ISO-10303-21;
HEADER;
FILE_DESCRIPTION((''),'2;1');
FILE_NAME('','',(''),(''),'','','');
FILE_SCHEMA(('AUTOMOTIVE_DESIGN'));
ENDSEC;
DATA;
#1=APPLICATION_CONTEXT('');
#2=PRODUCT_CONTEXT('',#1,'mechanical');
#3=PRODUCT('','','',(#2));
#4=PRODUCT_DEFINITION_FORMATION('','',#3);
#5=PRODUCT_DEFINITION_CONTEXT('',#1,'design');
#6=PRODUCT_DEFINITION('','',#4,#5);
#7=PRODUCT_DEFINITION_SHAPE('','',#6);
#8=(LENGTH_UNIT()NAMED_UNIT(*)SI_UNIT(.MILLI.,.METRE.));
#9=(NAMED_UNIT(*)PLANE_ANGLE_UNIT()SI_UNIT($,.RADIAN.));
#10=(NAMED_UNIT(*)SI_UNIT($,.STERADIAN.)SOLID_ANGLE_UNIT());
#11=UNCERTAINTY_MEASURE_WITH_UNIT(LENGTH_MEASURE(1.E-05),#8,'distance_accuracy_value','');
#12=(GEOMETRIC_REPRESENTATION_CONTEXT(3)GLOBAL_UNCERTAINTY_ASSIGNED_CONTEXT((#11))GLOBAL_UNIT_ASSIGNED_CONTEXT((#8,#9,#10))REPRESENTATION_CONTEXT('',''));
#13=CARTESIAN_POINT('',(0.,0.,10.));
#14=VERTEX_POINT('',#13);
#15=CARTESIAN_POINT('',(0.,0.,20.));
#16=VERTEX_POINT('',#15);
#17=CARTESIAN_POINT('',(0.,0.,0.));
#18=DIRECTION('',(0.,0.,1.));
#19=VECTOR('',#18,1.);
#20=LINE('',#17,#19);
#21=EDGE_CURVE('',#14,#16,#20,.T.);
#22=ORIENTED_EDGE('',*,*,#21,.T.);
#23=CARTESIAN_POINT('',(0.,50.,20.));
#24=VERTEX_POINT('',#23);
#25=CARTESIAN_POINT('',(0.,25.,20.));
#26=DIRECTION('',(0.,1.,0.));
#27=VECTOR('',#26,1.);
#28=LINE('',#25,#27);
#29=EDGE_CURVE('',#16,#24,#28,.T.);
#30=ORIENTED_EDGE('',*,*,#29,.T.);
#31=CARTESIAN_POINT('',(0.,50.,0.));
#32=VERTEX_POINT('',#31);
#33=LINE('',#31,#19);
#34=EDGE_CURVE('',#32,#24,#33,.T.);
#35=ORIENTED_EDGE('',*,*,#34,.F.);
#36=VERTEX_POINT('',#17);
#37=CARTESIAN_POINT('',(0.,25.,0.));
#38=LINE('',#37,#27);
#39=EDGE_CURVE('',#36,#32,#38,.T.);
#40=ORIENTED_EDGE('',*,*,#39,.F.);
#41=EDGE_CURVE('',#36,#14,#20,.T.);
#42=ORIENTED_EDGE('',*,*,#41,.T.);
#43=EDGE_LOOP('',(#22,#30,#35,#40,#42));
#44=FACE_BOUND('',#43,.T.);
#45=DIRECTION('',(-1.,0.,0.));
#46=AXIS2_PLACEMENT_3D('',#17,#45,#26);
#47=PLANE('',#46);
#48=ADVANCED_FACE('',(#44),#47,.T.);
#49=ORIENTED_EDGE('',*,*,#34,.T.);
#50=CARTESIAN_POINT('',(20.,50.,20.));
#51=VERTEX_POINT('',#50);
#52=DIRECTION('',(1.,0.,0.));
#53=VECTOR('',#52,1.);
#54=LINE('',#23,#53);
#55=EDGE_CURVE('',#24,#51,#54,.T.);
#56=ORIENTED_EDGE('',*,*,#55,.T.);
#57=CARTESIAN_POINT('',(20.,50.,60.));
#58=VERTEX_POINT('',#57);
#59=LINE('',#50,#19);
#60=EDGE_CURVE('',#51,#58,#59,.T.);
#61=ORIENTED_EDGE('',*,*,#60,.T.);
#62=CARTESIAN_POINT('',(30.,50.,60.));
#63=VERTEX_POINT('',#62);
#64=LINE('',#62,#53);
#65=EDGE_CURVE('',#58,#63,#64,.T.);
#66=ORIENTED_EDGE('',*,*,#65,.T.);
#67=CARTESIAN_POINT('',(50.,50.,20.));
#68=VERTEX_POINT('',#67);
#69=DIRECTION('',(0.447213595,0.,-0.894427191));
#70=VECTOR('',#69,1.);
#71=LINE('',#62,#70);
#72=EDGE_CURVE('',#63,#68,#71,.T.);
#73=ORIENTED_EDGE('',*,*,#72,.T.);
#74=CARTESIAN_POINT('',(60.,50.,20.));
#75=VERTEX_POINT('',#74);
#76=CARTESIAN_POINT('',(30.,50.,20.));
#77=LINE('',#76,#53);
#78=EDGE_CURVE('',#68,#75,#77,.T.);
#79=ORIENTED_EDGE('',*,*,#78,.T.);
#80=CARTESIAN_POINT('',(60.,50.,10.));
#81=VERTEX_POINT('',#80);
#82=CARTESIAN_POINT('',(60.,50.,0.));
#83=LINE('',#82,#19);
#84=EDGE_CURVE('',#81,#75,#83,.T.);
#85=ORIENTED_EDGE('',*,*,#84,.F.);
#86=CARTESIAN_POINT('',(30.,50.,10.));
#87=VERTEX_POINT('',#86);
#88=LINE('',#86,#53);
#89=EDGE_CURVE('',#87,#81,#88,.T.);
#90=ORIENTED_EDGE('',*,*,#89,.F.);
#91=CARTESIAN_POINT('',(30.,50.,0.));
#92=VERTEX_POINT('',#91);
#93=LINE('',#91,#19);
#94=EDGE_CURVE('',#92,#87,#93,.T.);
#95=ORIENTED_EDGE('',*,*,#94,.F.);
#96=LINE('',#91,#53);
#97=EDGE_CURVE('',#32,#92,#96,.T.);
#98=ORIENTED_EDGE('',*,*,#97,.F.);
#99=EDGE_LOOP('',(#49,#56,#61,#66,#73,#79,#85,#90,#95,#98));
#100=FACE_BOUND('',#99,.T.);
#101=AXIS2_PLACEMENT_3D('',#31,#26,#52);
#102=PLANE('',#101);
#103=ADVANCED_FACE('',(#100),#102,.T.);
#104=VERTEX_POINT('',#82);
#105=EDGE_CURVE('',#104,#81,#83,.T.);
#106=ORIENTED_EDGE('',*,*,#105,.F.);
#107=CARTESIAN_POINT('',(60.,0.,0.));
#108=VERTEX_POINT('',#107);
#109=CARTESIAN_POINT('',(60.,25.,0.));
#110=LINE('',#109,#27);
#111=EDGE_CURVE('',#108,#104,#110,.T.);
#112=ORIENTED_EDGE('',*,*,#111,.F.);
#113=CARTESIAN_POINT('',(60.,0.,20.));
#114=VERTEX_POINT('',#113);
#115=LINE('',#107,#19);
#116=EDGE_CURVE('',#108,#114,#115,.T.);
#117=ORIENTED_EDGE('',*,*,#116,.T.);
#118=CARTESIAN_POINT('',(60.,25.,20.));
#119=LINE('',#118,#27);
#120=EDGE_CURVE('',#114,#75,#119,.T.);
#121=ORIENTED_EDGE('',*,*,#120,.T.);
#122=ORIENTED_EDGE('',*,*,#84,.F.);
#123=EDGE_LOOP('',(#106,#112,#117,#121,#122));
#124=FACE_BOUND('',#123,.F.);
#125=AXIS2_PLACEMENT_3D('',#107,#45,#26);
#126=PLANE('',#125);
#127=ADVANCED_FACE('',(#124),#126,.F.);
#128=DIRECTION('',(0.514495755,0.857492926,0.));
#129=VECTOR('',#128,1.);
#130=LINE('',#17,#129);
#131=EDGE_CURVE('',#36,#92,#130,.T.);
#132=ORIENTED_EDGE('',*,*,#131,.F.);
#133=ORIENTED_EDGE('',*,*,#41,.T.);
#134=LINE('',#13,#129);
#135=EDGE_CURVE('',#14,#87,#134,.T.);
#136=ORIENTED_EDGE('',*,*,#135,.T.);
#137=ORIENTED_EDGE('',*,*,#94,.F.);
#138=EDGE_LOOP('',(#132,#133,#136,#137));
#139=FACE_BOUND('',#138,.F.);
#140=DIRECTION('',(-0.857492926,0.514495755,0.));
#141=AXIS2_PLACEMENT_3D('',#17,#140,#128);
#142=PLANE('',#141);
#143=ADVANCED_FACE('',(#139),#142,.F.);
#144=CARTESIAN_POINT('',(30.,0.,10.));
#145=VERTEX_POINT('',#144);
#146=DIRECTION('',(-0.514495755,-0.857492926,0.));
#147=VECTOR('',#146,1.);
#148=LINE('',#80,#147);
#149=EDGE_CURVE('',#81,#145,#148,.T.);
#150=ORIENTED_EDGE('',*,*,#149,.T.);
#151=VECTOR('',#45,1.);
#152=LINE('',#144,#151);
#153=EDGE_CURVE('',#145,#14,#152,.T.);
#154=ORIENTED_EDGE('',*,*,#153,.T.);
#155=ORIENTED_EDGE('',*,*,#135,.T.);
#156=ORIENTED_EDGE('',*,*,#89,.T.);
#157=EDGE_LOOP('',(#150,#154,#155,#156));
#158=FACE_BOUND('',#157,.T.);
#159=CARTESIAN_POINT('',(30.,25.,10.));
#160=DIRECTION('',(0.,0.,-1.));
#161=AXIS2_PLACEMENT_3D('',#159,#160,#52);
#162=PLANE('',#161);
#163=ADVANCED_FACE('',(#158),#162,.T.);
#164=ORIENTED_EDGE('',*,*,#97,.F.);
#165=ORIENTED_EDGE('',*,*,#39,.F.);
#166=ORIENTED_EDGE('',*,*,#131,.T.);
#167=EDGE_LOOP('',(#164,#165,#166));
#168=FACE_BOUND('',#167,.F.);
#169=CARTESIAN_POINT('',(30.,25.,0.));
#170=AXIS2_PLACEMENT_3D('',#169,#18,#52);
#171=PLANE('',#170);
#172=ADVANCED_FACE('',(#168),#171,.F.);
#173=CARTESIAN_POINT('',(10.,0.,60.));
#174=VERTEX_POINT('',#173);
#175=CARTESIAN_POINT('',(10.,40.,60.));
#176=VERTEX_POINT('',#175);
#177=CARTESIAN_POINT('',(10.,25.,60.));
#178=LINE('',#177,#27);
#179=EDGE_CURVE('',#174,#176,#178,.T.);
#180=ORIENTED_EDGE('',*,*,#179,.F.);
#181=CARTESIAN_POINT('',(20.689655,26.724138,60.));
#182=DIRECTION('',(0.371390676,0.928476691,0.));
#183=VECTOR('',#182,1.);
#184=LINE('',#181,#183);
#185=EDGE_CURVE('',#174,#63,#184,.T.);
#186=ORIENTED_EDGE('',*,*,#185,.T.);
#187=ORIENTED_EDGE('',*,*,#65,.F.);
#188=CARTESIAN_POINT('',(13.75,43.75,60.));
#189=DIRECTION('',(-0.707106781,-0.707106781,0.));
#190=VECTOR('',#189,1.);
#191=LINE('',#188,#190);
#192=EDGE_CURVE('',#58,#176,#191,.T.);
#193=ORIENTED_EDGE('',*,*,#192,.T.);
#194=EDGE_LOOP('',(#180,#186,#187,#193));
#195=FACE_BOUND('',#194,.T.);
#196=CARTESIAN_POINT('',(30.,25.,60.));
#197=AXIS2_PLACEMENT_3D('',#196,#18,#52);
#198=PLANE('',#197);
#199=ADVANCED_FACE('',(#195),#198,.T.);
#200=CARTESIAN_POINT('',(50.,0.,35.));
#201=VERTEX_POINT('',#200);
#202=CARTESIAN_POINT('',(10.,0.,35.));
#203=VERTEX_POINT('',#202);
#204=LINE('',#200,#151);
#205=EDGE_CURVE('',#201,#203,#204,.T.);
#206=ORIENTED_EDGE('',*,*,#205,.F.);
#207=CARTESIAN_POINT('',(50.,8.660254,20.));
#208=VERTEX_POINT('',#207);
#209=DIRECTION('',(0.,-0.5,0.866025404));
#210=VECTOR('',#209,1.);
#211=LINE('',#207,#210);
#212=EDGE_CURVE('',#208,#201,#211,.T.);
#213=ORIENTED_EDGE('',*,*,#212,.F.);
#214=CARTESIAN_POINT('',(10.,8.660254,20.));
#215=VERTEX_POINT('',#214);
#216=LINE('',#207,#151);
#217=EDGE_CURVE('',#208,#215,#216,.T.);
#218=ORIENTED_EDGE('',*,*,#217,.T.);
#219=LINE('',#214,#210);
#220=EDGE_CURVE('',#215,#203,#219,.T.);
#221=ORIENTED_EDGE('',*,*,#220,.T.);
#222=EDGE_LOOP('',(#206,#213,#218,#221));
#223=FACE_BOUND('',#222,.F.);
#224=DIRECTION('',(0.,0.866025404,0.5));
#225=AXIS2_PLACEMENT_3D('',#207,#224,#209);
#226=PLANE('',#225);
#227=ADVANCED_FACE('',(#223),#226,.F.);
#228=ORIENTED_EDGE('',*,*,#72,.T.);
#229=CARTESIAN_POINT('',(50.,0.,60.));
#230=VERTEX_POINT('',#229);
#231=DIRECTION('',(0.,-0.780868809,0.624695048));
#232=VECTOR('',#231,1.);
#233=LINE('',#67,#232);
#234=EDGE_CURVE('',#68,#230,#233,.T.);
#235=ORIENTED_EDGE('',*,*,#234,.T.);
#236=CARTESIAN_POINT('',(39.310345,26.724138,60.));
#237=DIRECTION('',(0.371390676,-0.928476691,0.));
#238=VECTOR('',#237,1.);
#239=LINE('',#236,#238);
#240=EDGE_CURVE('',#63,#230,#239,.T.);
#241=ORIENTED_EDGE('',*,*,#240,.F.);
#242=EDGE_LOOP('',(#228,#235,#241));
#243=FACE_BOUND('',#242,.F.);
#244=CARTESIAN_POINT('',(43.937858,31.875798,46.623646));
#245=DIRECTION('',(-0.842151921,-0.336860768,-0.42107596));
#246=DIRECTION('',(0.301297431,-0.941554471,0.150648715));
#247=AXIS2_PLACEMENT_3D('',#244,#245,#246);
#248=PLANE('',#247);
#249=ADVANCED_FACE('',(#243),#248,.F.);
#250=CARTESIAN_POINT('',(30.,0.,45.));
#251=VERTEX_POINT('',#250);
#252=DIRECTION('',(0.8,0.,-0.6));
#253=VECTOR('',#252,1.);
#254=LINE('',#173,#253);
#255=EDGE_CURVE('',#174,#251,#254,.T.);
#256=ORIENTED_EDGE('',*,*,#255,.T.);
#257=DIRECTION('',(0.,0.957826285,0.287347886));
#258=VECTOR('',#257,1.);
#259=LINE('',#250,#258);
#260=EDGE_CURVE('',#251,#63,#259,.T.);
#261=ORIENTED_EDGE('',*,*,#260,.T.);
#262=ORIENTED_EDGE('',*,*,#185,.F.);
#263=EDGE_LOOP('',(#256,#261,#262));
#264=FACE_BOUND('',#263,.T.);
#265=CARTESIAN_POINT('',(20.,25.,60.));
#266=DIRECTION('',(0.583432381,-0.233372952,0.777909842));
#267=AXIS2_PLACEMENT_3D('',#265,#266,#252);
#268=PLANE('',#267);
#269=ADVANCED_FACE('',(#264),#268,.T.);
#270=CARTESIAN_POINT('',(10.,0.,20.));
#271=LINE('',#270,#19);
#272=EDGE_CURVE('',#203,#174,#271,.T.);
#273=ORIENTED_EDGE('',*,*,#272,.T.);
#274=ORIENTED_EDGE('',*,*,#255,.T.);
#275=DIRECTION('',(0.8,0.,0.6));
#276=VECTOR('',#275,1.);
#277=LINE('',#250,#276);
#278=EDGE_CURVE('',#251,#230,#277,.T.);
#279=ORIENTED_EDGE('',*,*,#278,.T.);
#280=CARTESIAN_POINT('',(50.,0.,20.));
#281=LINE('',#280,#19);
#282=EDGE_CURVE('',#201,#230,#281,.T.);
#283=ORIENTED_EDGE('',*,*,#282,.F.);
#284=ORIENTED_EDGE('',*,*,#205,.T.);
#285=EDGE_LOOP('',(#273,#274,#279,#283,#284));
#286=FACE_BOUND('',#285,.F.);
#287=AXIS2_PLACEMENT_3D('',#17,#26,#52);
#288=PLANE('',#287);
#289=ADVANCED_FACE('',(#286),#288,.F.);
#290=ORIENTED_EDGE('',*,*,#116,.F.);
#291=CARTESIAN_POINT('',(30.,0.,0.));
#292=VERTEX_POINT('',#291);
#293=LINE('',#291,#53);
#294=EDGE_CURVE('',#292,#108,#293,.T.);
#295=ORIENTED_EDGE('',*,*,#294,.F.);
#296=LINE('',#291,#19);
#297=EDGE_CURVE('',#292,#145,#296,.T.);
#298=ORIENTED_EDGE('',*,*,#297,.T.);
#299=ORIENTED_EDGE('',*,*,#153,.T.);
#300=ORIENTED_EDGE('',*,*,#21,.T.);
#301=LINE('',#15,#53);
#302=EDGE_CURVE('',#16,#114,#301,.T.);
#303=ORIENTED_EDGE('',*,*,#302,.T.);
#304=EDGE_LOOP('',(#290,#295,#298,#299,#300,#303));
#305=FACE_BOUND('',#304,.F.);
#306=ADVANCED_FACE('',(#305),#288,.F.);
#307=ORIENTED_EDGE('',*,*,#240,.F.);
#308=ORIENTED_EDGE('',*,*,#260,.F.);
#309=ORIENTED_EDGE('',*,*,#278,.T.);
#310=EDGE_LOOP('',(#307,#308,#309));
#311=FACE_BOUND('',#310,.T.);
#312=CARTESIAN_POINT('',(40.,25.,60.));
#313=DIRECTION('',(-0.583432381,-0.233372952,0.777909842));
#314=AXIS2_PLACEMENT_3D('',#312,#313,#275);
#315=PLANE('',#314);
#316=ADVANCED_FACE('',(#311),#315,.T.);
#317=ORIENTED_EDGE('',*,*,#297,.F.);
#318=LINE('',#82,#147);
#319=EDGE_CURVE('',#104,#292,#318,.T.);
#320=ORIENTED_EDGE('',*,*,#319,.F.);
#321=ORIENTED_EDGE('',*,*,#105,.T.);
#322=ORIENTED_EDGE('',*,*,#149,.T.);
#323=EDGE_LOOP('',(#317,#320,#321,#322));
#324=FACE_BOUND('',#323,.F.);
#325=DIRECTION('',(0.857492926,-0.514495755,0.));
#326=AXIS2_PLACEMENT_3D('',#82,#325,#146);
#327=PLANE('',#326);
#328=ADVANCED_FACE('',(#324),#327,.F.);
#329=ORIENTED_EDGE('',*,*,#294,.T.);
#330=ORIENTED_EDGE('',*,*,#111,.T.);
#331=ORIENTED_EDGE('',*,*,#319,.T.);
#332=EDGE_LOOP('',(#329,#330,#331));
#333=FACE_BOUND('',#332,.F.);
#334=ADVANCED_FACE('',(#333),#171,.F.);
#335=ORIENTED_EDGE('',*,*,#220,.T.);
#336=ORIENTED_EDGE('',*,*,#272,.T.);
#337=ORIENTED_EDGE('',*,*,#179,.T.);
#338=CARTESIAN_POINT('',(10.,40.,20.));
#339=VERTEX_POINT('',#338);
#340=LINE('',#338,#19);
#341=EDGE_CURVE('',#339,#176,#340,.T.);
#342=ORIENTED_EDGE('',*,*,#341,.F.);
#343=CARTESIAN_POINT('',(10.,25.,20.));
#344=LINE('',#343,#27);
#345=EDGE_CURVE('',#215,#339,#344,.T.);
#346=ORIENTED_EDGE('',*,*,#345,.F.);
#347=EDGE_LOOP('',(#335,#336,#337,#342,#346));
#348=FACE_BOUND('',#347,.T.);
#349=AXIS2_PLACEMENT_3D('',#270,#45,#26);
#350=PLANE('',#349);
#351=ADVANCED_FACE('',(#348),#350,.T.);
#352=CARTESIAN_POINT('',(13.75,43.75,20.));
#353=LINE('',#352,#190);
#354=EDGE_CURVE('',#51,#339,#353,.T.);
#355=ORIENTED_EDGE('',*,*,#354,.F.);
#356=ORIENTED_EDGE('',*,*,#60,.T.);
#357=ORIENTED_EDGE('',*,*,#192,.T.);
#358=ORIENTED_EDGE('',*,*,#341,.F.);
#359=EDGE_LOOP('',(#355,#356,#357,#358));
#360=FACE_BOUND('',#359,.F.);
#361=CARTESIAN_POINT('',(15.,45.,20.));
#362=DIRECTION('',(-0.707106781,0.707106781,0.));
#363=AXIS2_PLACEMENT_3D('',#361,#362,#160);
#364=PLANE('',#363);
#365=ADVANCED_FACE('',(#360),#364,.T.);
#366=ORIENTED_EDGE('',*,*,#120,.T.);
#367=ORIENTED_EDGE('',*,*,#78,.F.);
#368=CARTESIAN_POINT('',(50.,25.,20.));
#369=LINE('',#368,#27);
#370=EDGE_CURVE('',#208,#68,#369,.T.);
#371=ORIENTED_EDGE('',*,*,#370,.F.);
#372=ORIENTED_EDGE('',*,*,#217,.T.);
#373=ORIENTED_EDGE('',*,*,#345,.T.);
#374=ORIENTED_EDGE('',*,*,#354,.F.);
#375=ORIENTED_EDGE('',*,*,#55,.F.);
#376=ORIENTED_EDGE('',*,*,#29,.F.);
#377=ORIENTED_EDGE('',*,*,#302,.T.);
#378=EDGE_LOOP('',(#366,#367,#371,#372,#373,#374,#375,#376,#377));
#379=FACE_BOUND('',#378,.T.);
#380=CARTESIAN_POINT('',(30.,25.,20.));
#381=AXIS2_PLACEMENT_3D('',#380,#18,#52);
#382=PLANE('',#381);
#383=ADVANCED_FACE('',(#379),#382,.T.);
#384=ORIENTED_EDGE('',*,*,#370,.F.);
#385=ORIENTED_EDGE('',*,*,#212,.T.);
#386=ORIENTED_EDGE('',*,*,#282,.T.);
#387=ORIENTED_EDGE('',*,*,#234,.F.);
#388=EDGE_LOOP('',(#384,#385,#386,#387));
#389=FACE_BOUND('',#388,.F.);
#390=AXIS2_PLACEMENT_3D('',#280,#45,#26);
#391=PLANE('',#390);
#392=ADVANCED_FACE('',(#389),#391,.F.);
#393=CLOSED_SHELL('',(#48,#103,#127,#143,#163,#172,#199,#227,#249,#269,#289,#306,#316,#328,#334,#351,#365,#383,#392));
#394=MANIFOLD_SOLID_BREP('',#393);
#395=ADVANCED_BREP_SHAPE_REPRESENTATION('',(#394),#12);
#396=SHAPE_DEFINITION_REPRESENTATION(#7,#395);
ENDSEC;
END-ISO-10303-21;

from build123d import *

# Parameters (mm, degrees)
F0_W      = 60
F0_H      = 50
F1_DEPTH  = 20
F4_DEPTH  = 10
F5_W      = 40
F5_H      = 50
F6_DEPTH  = 40
F7_SIZE   = 10
F9_DEPTH  = 40
F16_DEPTH = 16.8440384213


with BuildPart() as f1:
    # F0 (on Top) → F1 (new body)
    with BuildSketch(Plane.XY):
        with Locations((30, 25)):
            Rectangle(F0_W, F0_H)
    extrude(amount=F1_DEPTH)

    # F3 (on face) → F4 (cut, through all)
    with BuildSketch(Plane(origin=(0, 0, 0), x_dir=(1, 0, 0), z_dir=(0, 0, -1))):
        Polygon((30, 0), (0, 0), (30, -50), (60, -50), align=None)
    extrude(amount=-F4_DEPTH, mode=Mode.SUBTRACT)

    # F5 (on face) → F6 (join)
    with BuildSketch(Plane.XY.offset(20)):
        with Locations((30, 25)):
            Rectangle(F5_W, F5_H)
    extrude(amount=F6_DEPTH)

    # F7
    f7_edges = [f1.edges().sort_by_distance(p)[0] for p in [
        (10, 50, 40),
    ]]
    chamfer(f7_edges, length=F7_SIZE)

    # F8 (on face) → F9 (cut, through all)
    with BuildSketch(Plane.YZ.offset(50)):
        Polygon((0, 35), (0, 20), (8.6602540378, 20), align=None)
    extrude(amount=-F9_DEPTH, mode=Mode.SUBTRACT)

    # F13: sweep along a path in F11
    with BuildLine(Plane(origin=(30, 0, 0), x_dir=(0, -1, 0), z_dir=(-1, 0, 0))) as f13_path:
        Line((0, 45), (-50, 60))
    # F12 (on face) → F13 (sweep, cut)
    with BuildSketch(Plane.XZ):
        Polygon((50, 60), (10, 60), (30, 45), align=None)
    sweep(path=f13_path.line, mode=Mode.SUBTRACT)

    # F15 (on face) → F16 (cut, through all)
    with BuildSketch(Plane(origin=(56.7375886525, 22.695035461, 28.3687943262), x_dir=(0.3012974309, -0.9415544714, 0.1506487154), z_dir=(-0.8421519211, -0.3368607684, -0.4210759605))):
        Polygon((-28.9998777205, -4.472135955), (24.103794469, 31.304951685), (-28.9998777205, 40.249223595), align=None)
    extrude(amount=-F16_DEPTH, mode=Mode.SUBTRACT)


solid = f1.part
